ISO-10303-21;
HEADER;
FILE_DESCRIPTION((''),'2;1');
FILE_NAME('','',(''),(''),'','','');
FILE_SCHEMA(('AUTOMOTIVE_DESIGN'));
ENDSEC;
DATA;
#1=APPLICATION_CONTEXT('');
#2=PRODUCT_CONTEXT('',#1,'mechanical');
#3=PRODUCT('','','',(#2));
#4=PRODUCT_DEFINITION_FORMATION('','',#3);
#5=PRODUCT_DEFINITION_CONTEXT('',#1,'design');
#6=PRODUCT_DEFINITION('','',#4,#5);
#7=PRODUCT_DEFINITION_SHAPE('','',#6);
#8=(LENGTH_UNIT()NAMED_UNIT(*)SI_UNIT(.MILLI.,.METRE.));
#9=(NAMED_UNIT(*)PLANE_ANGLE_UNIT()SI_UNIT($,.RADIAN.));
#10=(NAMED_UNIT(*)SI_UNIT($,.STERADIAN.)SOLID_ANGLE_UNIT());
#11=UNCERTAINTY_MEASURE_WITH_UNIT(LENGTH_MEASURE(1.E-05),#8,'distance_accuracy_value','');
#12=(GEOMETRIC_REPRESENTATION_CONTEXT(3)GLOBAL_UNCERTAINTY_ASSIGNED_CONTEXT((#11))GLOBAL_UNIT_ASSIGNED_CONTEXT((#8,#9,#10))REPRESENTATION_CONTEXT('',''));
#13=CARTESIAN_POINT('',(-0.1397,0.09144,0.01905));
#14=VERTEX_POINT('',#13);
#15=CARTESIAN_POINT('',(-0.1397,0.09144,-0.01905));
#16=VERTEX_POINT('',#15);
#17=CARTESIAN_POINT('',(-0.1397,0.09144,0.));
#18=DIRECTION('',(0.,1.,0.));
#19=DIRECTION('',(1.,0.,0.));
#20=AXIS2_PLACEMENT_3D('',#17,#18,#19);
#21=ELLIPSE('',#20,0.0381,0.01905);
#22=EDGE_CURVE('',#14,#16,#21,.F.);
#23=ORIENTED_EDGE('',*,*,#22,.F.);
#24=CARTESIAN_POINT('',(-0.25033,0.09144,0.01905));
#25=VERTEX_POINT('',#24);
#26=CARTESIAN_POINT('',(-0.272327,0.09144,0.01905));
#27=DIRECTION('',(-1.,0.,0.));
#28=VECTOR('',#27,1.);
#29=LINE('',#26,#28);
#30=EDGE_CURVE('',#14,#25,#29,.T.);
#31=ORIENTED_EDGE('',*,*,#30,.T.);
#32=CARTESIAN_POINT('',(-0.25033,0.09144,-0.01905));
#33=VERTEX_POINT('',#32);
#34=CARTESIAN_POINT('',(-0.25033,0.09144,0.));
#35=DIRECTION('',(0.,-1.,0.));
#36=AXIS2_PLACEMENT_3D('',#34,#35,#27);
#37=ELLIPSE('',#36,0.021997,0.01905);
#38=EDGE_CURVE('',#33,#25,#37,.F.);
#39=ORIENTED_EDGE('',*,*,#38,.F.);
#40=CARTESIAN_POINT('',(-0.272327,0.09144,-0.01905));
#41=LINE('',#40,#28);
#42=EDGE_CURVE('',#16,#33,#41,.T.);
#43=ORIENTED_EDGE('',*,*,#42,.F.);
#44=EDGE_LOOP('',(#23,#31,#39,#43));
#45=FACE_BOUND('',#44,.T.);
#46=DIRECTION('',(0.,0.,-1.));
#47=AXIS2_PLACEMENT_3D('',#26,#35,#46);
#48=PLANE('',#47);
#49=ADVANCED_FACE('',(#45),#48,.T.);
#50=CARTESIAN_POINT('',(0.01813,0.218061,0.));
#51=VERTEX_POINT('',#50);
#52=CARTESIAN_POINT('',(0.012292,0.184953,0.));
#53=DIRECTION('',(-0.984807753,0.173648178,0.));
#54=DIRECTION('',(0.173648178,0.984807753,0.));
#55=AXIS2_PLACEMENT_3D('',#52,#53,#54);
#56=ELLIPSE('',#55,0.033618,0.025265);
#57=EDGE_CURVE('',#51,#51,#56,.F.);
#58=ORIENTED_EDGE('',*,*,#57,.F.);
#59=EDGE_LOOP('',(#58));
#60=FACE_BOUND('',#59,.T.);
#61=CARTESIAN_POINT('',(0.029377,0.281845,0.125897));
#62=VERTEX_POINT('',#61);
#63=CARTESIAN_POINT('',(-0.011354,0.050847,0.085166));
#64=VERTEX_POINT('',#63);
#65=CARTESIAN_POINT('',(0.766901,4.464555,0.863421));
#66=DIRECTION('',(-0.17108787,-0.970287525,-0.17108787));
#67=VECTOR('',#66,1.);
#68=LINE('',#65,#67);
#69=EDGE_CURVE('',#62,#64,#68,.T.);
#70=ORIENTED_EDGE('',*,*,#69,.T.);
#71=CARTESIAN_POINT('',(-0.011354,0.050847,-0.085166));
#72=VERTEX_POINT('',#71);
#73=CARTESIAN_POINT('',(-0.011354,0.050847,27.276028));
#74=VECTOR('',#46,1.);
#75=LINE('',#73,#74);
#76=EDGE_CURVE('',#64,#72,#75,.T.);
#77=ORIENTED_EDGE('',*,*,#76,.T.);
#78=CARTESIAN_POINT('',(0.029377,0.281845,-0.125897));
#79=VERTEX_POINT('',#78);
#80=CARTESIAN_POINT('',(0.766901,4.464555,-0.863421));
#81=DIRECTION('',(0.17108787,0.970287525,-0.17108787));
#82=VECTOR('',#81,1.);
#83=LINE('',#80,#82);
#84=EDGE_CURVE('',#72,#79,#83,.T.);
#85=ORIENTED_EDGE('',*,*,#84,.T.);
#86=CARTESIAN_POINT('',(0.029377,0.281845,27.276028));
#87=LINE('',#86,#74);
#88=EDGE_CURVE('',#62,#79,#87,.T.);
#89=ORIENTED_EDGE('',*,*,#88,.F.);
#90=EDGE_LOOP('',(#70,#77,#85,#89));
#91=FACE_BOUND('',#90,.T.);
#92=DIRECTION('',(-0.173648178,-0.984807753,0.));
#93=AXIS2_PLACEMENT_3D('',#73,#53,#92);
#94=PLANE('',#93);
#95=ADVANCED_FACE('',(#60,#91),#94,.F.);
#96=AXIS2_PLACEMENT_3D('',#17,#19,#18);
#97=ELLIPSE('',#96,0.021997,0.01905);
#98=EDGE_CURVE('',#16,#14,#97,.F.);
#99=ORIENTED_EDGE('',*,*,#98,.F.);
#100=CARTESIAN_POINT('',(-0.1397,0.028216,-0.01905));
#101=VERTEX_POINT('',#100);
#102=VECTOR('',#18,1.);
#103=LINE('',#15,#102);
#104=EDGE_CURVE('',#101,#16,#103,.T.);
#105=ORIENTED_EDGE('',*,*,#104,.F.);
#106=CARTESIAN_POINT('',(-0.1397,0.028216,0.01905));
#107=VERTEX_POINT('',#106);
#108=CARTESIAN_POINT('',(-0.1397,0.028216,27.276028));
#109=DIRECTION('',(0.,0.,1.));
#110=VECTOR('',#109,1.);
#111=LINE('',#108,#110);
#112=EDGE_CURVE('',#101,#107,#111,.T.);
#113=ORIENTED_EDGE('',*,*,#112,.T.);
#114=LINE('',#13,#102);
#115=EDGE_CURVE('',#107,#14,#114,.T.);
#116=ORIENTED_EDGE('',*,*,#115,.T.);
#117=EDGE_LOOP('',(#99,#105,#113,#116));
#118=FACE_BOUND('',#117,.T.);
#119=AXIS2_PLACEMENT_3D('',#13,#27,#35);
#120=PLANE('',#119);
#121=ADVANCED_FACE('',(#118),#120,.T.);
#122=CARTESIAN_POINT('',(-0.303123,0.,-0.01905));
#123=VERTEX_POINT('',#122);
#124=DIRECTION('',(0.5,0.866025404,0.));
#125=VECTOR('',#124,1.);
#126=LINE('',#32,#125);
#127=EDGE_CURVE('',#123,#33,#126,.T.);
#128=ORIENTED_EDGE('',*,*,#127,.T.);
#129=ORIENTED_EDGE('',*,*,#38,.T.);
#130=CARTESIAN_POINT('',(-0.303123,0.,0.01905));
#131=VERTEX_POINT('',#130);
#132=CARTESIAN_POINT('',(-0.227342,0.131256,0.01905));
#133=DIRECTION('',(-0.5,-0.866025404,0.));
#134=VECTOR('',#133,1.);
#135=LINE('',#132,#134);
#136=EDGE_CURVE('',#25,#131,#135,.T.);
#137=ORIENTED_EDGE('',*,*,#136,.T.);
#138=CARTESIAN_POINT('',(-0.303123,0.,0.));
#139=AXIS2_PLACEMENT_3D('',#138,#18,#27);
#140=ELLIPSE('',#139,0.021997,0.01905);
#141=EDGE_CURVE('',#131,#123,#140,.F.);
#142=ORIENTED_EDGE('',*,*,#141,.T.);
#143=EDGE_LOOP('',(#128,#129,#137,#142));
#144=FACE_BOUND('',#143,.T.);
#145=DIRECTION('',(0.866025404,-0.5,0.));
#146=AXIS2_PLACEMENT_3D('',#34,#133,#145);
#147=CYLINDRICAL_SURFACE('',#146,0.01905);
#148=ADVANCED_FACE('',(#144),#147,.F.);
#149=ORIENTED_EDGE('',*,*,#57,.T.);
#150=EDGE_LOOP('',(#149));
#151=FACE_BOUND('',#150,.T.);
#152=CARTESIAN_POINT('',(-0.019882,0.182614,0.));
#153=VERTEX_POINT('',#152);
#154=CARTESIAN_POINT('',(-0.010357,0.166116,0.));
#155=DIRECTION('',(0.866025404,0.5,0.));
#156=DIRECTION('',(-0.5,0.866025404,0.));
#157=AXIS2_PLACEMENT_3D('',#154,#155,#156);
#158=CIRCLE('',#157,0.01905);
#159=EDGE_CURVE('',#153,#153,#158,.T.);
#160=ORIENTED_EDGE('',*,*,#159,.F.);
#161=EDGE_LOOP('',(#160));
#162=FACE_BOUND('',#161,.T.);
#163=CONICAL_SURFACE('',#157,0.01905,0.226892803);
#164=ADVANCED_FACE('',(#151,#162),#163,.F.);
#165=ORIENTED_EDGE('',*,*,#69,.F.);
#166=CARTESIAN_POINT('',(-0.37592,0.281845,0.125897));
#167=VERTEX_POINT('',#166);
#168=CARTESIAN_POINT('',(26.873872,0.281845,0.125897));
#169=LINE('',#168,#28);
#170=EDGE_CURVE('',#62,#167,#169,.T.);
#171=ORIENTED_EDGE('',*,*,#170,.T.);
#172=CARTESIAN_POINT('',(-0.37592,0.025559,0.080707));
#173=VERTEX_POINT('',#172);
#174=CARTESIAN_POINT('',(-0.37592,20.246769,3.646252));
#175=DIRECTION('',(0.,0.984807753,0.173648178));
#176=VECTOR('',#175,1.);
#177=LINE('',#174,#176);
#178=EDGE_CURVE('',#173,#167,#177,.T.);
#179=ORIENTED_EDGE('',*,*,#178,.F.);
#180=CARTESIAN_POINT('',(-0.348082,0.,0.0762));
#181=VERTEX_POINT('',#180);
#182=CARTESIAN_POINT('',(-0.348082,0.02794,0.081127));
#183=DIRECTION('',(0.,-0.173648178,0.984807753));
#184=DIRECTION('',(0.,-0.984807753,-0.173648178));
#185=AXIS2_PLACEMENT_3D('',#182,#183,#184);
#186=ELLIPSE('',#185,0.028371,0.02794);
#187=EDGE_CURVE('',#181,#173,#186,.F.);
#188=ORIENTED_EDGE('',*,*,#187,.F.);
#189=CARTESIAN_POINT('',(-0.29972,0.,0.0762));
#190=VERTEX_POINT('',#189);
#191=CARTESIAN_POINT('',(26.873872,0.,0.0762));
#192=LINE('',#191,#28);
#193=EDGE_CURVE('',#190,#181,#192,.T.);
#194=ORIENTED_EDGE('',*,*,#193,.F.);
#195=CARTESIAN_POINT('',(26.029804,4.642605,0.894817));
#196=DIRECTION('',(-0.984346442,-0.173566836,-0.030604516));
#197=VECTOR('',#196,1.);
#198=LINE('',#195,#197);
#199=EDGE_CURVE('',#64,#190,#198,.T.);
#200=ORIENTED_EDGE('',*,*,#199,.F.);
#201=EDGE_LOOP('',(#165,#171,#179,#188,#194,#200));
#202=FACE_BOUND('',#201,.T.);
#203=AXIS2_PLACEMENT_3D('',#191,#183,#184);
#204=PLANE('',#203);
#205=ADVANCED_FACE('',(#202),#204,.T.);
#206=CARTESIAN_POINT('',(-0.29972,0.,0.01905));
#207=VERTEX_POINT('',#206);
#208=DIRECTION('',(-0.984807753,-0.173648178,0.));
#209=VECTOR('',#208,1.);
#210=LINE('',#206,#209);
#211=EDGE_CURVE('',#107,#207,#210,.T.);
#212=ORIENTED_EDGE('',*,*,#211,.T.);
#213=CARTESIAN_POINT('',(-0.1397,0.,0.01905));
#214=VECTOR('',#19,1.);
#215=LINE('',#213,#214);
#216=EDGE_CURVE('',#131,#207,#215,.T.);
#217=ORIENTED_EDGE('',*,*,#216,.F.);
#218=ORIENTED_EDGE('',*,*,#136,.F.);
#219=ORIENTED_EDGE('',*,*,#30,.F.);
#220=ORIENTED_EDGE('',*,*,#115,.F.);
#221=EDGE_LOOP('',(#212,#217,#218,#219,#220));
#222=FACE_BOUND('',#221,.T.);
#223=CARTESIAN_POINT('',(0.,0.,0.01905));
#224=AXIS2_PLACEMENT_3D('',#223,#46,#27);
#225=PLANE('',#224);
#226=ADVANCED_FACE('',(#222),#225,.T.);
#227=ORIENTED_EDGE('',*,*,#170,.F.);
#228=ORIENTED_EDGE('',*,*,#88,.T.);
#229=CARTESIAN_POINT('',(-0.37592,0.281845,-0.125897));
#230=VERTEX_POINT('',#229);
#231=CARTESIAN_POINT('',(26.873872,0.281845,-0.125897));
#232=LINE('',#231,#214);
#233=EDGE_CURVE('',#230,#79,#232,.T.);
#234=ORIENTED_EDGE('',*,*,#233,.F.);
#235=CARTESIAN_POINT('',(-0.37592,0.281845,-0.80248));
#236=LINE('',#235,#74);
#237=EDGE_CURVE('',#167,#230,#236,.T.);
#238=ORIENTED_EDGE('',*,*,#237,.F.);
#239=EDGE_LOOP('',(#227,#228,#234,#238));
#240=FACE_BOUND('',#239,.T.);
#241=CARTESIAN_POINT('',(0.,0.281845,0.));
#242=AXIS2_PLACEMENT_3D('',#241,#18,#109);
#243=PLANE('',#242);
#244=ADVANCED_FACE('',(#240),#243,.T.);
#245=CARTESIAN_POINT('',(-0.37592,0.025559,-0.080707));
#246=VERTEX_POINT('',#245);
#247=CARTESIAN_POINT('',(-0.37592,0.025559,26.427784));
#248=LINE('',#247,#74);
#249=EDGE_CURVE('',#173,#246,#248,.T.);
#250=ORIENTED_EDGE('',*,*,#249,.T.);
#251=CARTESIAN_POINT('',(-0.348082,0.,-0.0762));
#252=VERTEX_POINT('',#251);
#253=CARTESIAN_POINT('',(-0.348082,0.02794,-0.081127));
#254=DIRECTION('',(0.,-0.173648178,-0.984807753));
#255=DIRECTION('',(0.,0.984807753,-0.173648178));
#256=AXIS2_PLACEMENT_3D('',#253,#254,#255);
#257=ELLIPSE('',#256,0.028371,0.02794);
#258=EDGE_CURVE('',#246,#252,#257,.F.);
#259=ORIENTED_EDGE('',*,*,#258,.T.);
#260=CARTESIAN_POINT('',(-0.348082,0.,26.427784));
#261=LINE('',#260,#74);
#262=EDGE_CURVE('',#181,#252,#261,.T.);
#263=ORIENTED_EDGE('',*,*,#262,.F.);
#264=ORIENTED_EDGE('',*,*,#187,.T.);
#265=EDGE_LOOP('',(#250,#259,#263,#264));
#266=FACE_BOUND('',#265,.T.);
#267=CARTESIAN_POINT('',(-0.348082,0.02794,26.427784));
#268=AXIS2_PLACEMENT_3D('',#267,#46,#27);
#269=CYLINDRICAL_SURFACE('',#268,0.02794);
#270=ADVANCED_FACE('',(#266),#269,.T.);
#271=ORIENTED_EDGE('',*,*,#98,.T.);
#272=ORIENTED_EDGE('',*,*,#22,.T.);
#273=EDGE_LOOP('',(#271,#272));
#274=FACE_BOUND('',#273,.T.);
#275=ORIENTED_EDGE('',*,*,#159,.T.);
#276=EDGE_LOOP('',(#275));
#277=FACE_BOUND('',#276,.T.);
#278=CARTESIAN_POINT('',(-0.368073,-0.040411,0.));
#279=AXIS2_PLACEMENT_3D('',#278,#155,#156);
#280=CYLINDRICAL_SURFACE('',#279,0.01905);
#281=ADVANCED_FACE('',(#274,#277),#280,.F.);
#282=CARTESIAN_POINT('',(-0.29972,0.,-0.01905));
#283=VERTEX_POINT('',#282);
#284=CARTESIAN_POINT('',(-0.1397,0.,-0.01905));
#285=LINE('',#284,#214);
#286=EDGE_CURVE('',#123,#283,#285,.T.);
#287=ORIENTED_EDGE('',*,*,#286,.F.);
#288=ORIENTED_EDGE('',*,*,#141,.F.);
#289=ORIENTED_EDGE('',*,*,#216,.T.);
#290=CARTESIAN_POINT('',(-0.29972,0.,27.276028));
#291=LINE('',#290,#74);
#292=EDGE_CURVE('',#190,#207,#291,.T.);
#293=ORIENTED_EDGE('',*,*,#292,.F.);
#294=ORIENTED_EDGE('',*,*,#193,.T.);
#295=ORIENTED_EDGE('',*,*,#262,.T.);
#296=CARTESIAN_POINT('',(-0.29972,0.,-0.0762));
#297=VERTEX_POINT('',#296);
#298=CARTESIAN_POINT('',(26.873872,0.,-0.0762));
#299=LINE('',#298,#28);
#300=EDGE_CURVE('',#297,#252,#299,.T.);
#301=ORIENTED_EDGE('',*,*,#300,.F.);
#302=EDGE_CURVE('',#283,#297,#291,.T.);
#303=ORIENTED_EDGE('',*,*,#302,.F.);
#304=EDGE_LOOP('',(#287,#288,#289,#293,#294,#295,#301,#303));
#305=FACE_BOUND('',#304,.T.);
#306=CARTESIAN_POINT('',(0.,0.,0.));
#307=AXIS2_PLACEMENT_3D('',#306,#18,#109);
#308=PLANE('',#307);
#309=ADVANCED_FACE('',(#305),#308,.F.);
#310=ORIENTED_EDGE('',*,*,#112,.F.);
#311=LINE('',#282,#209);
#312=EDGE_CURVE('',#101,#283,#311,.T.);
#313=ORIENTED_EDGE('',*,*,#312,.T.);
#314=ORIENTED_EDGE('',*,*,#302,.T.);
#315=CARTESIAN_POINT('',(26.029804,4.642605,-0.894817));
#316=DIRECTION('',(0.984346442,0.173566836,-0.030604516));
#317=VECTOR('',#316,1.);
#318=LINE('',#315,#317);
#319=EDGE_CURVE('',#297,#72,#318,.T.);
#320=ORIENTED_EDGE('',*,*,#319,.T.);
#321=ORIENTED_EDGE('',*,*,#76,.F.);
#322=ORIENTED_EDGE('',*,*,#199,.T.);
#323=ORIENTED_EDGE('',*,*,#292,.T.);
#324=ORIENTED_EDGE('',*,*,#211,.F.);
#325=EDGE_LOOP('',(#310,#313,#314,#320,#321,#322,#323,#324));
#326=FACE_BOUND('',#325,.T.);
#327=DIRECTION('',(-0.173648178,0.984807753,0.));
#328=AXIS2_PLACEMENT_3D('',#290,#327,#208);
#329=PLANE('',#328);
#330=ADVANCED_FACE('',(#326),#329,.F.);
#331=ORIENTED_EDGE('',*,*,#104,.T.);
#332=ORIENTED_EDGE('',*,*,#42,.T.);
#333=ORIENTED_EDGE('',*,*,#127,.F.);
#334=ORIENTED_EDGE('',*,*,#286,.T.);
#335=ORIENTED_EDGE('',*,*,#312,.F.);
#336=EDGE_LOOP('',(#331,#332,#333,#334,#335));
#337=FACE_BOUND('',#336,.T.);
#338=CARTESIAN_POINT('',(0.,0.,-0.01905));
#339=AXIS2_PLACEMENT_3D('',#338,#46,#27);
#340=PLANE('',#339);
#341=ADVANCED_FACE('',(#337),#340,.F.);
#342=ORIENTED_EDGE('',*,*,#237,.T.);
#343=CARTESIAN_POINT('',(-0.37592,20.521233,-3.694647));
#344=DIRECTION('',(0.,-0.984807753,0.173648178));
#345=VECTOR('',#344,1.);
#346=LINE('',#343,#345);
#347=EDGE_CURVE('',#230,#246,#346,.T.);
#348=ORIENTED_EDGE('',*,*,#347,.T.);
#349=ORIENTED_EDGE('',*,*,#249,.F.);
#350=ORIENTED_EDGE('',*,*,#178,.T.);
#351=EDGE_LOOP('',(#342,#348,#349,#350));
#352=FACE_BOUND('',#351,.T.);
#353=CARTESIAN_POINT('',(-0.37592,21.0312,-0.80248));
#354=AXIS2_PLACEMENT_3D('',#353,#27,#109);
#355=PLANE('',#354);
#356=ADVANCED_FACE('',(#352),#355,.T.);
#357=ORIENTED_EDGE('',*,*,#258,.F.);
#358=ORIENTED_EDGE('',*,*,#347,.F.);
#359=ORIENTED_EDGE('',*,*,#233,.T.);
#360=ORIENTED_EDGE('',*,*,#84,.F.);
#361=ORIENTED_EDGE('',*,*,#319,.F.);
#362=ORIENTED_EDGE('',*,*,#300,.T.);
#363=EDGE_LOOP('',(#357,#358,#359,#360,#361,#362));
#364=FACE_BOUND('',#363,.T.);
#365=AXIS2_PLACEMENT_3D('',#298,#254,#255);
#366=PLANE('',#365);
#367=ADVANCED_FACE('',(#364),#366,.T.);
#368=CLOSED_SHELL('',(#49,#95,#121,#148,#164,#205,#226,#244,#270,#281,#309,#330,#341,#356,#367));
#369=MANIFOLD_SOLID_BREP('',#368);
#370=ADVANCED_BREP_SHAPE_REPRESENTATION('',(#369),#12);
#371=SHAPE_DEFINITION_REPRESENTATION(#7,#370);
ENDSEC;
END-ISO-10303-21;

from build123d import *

# Parameters (mm, degrees)
TD_SKETCH_R                             = 0.79248
TL_FEATURE_DEPTH                        = 21.0312
TDF_STD_SKETCH_W                        = 1.60495996
TDF_STD_SKETCH_H                        = 1.60495996
TDF_STD_FEATURE_DEPTH                   = 22.061040395
ISA_20_STD_FEATURE_DEPTH                = 22.061040395
ISA_20_STD_FEATURE_DEPTH_BACK           = 22.061040395
F_10BA_STD_FEATURE_DEPTH                = 22.061040395
F_10BA_STD_FEATURE_DEPTH_BACK           = 22.061040395
ERW_STD_FEATURE_DEPTH                   = 0.01905
H_STD_FEATURE_START                     = -0.299236296
H_STD_FEATURE_OUTLINE_R                 = 0.01905
H_STD_FEATURE_DEPTH                     = 0.299236296
H_STD_FEATURE_START_2                   = -0.291139417
H_STD_FEATURE_2_OUTLINE_R               = 0.01905
H_STD_FEATURE_2_DEPTH                   = 0.065991236
H_STD_FEATURE_START_3                   = -1
H_STD_FEATURE_3_OUTLINE_W               = 3
H_STD_FEATURE_3_OUTLINE_H               = 4
H_STD_FEATURE_3_DEPTH                   = 1
H_STD_CUT_FEATURE_DEPTH                 = 22.061040395
H_STD_CUT_FEATURE_DEPTH_BACK            = 22.061040395
H_STD_SKETCH_3_R                        = 0.01905
FUNNEL_FINAL_DIAMETRE_STD_FEATURE_DEPTH = 2.499995
FUNNEL_FINAL_DIAMETRE_STD_FEATURE_DRAFT = -13
ROUND_BR_STD_FEATURE_START              = -1
ROUND_BR_STD_FEATURE_DEPTH              = 1.009339363
FRO_STD_FEATURE_DEPTH                   = 22.061040395
FRO_STD_FEATURE_DEPTH_BACK              = 22.061040395


with BuildPart() as part:
    # TD_sketch → TL_feature (new body)
    with BuildSketch(Plane(origin=(0, 0, 0), x_dir=(1, 0, 0), z_dir=(0, 1, 0))):
        with Locations(Location((0, 0, 0), (0, 0, 270))):
            Circle(TD_SKETCH_R)
    extrude(amount=TL_FEATURE_DEPTH)

    # TDF_STD_sketch → TDF_STD_feature (cut, through all)
    with BuildSketch(Plane(origin=(0, 0, 0), x_dir=(1, 0, 0), z_dir=(0, 1, 0))):
        with Locations((-1.17839998, 0)):
            Rectangle(TDF_STD_SKETCH_W, TDF_STD_SKETCH_H)
    extrude(amount=TDF_STD_FEATURE_DEPTH, mode=Mode.SUBTRACT)

    # ISA_20_STD_sketch → ISA_20_STD_feature (cut, two sides: drawn at the far end of the back side and taken through both)
    with BuildSketch(Plane(origin=(0, 0, 0), x_dir=(0, 0, -1), z_dir=(1, 0, 0)).offset(-ISA_20_STD_FEATURE_DEPTH_BACK)):
        Polygon((-12.996080373, 73.27228267), (-3.784567997, 21.0312), (-0.0762, 0), (0.0762, 0), (3.784567997, 21.0312), (12.996080373, 73.27228267), (12.996080373, -32.821688483), (-12.996080373, -32.821688483), align=None)
    extrude(amount=ISA_20_STD_FEATURE_DEPTH + ISA_20_STD_FEATURE_DEPTH_BACK, mode=Mode.SUBTRACT)

    # 10BA_STD_sketch → 10BA_STD_feature (cut, two sides: drawn at the far end of the back side and taken through both)
    with BuildSketch(Plane.XY.offset(-F_10BA_STD_FEATURE_DEPTH_BACK)):
        Polygon((-53.216424634, 0), (-0.37592, 0), (-0.29972, 0), (-0.011354365, 0.050846642), (3.688047997, 21.0312), (12.863705333, 73.068938636), (91.245889802, 2.18375769), (25.165759835, -70.885180946), align=None)
    extrude(amount=F_10BA_STD_FEATURE_DEPTH + F_10BA_STD_FEATURE_DEPTH_BACK, mode=Mode.SUBTRACT)


with BuildPart() as body_2:
    # ERW_STD_sketch → ERW_STD_feature (new, symmetric)
    with BuildSketch(Plane.XY):
        Polygon((-0.1397, 0.09144), (-0.1397, 0), (-0.32512, 0), (-0.272327091, 0.09144), align=None)
    extrude(amount=ERW_STD_FEATURE_DEPTH, both=True)


with BuildPart() as body_3:
    # H_STD_feature: read off the stored shape, not the designer's step
    # H_STD_feature outline → H_STD_feature (new body)
    with BuildSketch(Plane(origin=(-0.010357492, 0.166115932, 0), x_dir=(0, 0, -1), z_dir=(0.8660254037844415, 0.4999999999999953, 0)).offset(H_STD_FEATURE_START)):
        Circle(H_STD_FEATURE_OUTLINE_R)
    extrude(amount=H_STD_FEATURE_DEPTH)

    # H_STD_feature 2 outline → H_STD_feature 2 (add)
    with BuildSketch(Plane(origin=(0, 0, 0), x_dir=(0.4999999999999952, -0.8660254037844414, 0), z_dir=(0.8660254037844414, 0.4999999999999952, 0)).offset(H_STD_FEATURE_START_2)):
        with Locations((-0.149039363, 0)):
            Circle(H_STD_FEATURE_2_OUTLINE_R)
    extrude(amount=H_STD_FEATURE_2_DEPTH)

    # H_STD_feature 3 outline → H_STD_feature 3 (cut)
    with BuildSketch(Plane(origin=(0, 0, 0), x_dir=(1, 0, 0), z_dir=(0, 1, 0)).offset(H_STD_FEATURE_START_3)):
        with Locations((-0.5, 0)):
            Rectangle(H_STD_FEATURE_3_OUTLINE_W, H_STD_FEATURE_3_OUTLINE_H)
    extrude(amount=H_STD_FEATURE_3_DEPTH, mode=Mode.SUBTRACT)

    # H_STD_cut_sketch → H_STD_cut_feature (cut, two sides: drawn at the far end of the back side and taken through both)
    with BuildSketch(Plane.XY.offset(-H_STD_CUT_FEATURE_DEPTH_BACK)):
        Polygon((-52.376024458, 0.09144), (-0.272327091, 0.09144), (-0.1397, 0.09144), (-0.1397, 0), (-0.1397, -52.103697367), (-73.796388553, -125.818508284), (-126.032713012, -73.623370917), align=None)
    extrude(amount=H_STD_CUT_FEATURE_DEPTH + H_STD_CUT_FEATURE_DEPTH_BACK, mode=Mode.SUBTRACT)


with BuildPart() as body_2_1:
    add(body_2.part)

    # H_STD_fix_feature: union body 3
    add(body_3.part)


with BuildPart() as funnel_final_diametre_std_feature_tool:
    # H_STD_sketch<3> → funnel_final_diametre_STD_feature (with draft: the straight prism first)
    with BuildSketch(Plane(origin=(-0.010357492, 0.166115932, 0), x_dir=(0, 0, -1), z_dir=(0.8660254037844415, 0.4999999999999953, 0))):
        with Locations(Location((0, 0, 0), (0, 0, 90))):
            Circle(H_STD_SKETCH_3_R)
    extrude(amount=FUNNEL_FINAL_DIAMETRE_STD_FEATURE_DEPTH)
    # funnel_final_diametre_STD_feature: the draft: its side faces are tilted about the plane it starts from
    funnel_final_diametre_std_feature_sides = [funnel_final_diametre_std_feature_tool.faces().sort_by_distance(p)[0] for p in [
        (1.081697098, 0.774616898, 0),
    ]]
    draft(funnel_final_diametre_std_feature_sides, Plane(origin=(-0.010357492, 0.166115932, 0), x_dir=(0, 0, -1), z_dir=(0.8660254037844415, 0.4999999999999953, 0)), FUNNEL_FINAL_DIAMETRE_STD_FEATURE_DRAFT)


with BuildPart() as body_2_2:
    add(body_2_1.part)

    # funnel_final_diametre_STD_feature: add funnel_final_diametre_std_feature_tool
    add(funnel_final_diametre_std_feature_tool.part)

    # ROUND_BR_STD_feature: read off the stored shape, not the designer's step
    # ROUND_BR_STD_feature outline → ROUND_BR_STD_feature (cut)
    with BuildSketch(Plane(origin=(0, 0, 0), x_dir=(0.8660254037844362, -0.5000000000000042, 0), z_dir=(0.5000000000000042, 0.8660254037844363, 0)).offset(ROUND_BR_STD_FEATURE_START)):
        with BuildLine():
            Line((-0.281562179, -0.01905), (-0.262512179, -0.01905))
            ThreePointArc((-0.262512179, -0.01905), (-0.275982563, -0.013470384), (-0.281562179, 0))
            Line((-0.281562179, 0), (-0.281562179, -0.01905))
        make_face()
        with BuildLine():
            Line((-0.281562179, 0.01905), (-0.281562179, 0))
            ThreePointArc((-0.281562179, 0), (-0.275982563, 0.013470384), (-0.262512179, 0.01905))
            Line((-0.262512179, 0.01905), (-0.281562179, 0.01905))
        make_face()
    extrude(amount=ROUND_BR_STD_FEATURE_DEPTH, mode=Mode.SUBTRACT)


with BuildPart() as part_1:
    add(part.part)

    # COMBINE_STD_feature: cut body 2
    add(body_2_2.part, mode=Mode.SUBTRACT)

    # FRO_STD_sketch → FRO_STD_feature (cut, two sides: drawn at the far end of the back side and taken through both)
    with BuildSketch(Plane.XY.offset(-FRO_STD_FEATURE_DEPTH_BACK)):
        with BuildLine():
            Line((-0.3760216, 52.152149391), (-0.3760216, 0.02794))
            ThreePointArc((-0.3760216, 0.02794), (-0.367838163, 0.008183437), (-0.3480816, 0))
            Line((-0.3480816, 0), (51.776127791, 0))
            Line((51.776127791, 0), (-21.938636058, -73.714763849))
            Line((-21.938636058, -73.714763849), (-74.090785449, -21.562614458))
            Line((-74.090785449, -21.562614458), (-0.3760216, 52.152149391))
        make_face()
    extrude(amount=FRO_STD_FEATURE_DEPTH + FRO_STD_FEATURE_DEPTH_BACK, mode=Mode.SUBTRACT)

    # cut_feature
    split(bisect_by=Plane(origin=(0, 0.281844732, 0), x_dir=(1, 0, 0), z_dir=(0, 1, 0)), keep=Keep.BOTTOM)


solid = part_1.part
